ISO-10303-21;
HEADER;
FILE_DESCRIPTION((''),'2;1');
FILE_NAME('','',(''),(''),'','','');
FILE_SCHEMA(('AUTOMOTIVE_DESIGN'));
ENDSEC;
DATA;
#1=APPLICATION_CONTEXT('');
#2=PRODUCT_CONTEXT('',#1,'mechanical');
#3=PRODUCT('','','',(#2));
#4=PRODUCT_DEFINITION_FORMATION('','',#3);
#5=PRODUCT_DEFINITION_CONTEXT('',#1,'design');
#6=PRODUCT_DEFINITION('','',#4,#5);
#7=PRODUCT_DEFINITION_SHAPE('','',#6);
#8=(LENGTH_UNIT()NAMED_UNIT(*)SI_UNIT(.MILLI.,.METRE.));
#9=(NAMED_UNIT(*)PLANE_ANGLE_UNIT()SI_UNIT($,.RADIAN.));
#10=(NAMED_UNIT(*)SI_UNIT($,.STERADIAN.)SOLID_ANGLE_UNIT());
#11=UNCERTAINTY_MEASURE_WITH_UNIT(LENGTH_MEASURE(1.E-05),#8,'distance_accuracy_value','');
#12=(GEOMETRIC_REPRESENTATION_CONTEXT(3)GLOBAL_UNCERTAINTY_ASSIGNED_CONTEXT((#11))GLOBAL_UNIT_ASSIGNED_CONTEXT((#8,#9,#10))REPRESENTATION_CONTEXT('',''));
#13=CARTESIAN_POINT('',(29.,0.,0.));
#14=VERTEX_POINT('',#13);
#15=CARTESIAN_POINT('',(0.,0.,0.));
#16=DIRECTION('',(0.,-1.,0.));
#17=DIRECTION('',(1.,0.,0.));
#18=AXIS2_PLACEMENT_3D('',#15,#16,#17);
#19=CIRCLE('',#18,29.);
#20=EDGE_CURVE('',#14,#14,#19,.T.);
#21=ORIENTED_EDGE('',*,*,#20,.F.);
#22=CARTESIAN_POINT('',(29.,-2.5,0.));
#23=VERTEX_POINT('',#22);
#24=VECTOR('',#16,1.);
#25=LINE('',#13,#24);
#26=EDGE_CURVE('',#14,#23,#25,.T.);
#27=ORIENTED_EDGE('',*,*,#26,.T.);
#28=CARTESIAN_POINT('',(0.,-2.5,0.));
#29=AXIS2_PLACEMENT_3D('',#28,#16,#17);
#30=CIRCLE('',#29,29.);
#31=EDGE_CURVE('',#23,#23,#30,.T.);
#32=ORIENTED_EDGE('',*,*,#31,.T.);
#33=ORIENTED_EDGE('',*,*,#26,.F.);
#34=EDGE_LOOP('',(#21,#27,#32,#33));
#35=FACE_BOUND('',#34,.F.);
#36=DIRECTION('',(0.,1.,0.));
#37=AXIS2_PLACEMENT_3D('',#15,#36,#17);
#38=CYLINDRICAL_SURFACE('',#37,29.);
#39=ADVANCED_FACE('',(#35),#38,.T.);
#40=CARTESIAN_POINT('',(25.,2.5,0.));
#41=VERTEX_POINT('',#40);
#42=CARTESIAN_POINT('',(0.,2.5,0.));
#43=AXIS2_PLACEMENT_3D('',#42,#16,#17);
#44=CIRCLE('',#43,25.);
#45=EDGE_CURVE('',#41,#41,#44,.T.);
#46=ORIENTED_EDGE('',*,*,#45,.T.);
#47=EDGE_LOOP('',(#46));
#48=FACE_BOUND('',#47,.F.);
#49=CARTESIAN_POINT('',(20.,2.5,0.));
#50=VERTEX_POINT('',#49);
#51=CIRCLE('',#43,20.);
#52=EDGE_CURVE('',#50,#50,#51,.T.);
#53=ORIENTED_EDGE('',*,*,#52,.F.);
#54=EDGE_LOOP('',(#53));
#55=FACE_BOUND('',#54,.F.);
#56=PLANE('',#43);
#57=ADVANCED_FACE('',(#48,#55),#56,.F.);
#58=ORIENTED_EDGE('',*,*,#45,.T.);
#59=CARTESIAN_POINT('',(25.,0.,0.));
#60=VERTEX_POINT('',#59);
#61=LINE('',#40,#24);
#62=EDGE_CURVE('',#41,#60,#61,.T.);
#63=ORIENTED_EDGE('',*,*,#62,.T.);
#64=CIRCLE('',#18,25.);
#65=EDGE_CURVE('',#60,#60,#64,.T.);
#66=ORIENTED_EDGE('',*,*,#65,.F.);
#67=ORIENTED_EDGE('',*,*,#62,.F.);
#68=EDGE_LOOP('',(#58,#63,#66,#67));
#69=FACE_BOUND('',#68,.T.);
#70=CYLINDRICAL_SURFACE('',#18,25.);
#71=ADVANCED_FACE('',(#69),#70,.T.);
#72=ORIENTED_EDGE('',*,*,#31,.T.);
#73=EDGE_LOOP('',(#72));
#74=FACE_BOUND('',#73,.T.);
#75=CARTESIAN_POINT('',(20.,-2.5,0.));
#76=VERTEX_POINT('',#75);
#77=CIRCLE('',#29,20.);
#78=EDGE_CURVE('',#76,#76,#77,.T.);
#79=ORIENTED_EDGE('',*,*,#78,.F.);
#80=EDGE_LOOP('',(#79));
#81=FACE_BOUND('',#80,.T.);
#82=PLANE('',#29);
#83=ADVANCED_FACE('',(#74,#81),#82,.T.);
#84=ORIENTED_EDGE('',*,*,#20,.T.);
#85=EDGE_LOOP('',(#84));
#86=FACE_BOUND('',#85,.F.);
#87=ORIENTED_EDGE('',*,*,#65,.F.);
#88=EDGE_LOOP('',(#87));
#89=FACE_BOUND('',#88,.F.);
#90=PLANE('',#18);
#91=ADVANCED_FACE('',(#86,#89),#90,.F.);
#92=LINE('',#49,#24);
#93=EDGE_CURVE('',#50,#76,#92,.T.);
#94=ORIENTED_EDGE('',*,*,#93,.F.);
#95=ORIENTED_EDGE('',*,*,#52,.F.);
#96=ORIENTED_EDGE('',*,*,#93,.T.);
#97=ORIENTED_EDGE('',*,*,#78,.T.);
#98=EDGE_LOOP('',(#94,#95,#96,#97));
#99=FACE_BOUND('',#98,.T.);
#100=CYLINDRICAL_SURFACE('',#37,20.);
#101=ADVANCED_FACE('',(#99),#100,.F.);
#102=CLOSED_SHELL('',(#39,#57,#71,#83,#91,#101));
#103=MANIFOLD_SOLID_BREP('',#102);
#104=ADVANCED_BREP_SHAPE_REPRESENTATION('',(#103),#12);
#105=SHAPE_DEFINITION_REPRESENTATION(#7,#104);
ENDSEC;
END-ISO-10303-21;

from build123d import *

# Parameters (mm, degrees)
F0_R     = 29
F0_R_2   = 25
F0_R_3   = 23
F0_R_4   = 20
F1_DEPTH = 2.5
F2_DEPTH = 2.5


# Not quite as in the source:
# - the program builds the solid bodies; features that only make, move or delete a surface that nothing else refers to are left out


with BuildPart() as f1:
    # F0 (on Front) → F1 (new body)
    with BuildSketch(Plane.XZ):
        Circle(F0_R)
        Circle(F0_R_2, mode=Mode.SUBTRACT)
        Circle(F0_R_2)
        Circle(F0_R_3, mode=Mode.SUBTRACT)
        Circle(F0_R_3)
        Circle(F0_R_4, mode=Mode.SUBTRACT)
    extrude(amount=F1_DEPTH)

    # F0 (on Front) → F2 (join, symmetric)
    with BuildSketch(Plane.XZ):
        Circle(F0_R_2)
        Circle(F0_R_3, mode=Mode.SUBTRACT)
        Circle(F0_R_3)
        Circle(F0_R_4, mode=Mode.SUBTRACT)
    extrude(amount=F2_DEPTH, both=True)


solid = f1.part
